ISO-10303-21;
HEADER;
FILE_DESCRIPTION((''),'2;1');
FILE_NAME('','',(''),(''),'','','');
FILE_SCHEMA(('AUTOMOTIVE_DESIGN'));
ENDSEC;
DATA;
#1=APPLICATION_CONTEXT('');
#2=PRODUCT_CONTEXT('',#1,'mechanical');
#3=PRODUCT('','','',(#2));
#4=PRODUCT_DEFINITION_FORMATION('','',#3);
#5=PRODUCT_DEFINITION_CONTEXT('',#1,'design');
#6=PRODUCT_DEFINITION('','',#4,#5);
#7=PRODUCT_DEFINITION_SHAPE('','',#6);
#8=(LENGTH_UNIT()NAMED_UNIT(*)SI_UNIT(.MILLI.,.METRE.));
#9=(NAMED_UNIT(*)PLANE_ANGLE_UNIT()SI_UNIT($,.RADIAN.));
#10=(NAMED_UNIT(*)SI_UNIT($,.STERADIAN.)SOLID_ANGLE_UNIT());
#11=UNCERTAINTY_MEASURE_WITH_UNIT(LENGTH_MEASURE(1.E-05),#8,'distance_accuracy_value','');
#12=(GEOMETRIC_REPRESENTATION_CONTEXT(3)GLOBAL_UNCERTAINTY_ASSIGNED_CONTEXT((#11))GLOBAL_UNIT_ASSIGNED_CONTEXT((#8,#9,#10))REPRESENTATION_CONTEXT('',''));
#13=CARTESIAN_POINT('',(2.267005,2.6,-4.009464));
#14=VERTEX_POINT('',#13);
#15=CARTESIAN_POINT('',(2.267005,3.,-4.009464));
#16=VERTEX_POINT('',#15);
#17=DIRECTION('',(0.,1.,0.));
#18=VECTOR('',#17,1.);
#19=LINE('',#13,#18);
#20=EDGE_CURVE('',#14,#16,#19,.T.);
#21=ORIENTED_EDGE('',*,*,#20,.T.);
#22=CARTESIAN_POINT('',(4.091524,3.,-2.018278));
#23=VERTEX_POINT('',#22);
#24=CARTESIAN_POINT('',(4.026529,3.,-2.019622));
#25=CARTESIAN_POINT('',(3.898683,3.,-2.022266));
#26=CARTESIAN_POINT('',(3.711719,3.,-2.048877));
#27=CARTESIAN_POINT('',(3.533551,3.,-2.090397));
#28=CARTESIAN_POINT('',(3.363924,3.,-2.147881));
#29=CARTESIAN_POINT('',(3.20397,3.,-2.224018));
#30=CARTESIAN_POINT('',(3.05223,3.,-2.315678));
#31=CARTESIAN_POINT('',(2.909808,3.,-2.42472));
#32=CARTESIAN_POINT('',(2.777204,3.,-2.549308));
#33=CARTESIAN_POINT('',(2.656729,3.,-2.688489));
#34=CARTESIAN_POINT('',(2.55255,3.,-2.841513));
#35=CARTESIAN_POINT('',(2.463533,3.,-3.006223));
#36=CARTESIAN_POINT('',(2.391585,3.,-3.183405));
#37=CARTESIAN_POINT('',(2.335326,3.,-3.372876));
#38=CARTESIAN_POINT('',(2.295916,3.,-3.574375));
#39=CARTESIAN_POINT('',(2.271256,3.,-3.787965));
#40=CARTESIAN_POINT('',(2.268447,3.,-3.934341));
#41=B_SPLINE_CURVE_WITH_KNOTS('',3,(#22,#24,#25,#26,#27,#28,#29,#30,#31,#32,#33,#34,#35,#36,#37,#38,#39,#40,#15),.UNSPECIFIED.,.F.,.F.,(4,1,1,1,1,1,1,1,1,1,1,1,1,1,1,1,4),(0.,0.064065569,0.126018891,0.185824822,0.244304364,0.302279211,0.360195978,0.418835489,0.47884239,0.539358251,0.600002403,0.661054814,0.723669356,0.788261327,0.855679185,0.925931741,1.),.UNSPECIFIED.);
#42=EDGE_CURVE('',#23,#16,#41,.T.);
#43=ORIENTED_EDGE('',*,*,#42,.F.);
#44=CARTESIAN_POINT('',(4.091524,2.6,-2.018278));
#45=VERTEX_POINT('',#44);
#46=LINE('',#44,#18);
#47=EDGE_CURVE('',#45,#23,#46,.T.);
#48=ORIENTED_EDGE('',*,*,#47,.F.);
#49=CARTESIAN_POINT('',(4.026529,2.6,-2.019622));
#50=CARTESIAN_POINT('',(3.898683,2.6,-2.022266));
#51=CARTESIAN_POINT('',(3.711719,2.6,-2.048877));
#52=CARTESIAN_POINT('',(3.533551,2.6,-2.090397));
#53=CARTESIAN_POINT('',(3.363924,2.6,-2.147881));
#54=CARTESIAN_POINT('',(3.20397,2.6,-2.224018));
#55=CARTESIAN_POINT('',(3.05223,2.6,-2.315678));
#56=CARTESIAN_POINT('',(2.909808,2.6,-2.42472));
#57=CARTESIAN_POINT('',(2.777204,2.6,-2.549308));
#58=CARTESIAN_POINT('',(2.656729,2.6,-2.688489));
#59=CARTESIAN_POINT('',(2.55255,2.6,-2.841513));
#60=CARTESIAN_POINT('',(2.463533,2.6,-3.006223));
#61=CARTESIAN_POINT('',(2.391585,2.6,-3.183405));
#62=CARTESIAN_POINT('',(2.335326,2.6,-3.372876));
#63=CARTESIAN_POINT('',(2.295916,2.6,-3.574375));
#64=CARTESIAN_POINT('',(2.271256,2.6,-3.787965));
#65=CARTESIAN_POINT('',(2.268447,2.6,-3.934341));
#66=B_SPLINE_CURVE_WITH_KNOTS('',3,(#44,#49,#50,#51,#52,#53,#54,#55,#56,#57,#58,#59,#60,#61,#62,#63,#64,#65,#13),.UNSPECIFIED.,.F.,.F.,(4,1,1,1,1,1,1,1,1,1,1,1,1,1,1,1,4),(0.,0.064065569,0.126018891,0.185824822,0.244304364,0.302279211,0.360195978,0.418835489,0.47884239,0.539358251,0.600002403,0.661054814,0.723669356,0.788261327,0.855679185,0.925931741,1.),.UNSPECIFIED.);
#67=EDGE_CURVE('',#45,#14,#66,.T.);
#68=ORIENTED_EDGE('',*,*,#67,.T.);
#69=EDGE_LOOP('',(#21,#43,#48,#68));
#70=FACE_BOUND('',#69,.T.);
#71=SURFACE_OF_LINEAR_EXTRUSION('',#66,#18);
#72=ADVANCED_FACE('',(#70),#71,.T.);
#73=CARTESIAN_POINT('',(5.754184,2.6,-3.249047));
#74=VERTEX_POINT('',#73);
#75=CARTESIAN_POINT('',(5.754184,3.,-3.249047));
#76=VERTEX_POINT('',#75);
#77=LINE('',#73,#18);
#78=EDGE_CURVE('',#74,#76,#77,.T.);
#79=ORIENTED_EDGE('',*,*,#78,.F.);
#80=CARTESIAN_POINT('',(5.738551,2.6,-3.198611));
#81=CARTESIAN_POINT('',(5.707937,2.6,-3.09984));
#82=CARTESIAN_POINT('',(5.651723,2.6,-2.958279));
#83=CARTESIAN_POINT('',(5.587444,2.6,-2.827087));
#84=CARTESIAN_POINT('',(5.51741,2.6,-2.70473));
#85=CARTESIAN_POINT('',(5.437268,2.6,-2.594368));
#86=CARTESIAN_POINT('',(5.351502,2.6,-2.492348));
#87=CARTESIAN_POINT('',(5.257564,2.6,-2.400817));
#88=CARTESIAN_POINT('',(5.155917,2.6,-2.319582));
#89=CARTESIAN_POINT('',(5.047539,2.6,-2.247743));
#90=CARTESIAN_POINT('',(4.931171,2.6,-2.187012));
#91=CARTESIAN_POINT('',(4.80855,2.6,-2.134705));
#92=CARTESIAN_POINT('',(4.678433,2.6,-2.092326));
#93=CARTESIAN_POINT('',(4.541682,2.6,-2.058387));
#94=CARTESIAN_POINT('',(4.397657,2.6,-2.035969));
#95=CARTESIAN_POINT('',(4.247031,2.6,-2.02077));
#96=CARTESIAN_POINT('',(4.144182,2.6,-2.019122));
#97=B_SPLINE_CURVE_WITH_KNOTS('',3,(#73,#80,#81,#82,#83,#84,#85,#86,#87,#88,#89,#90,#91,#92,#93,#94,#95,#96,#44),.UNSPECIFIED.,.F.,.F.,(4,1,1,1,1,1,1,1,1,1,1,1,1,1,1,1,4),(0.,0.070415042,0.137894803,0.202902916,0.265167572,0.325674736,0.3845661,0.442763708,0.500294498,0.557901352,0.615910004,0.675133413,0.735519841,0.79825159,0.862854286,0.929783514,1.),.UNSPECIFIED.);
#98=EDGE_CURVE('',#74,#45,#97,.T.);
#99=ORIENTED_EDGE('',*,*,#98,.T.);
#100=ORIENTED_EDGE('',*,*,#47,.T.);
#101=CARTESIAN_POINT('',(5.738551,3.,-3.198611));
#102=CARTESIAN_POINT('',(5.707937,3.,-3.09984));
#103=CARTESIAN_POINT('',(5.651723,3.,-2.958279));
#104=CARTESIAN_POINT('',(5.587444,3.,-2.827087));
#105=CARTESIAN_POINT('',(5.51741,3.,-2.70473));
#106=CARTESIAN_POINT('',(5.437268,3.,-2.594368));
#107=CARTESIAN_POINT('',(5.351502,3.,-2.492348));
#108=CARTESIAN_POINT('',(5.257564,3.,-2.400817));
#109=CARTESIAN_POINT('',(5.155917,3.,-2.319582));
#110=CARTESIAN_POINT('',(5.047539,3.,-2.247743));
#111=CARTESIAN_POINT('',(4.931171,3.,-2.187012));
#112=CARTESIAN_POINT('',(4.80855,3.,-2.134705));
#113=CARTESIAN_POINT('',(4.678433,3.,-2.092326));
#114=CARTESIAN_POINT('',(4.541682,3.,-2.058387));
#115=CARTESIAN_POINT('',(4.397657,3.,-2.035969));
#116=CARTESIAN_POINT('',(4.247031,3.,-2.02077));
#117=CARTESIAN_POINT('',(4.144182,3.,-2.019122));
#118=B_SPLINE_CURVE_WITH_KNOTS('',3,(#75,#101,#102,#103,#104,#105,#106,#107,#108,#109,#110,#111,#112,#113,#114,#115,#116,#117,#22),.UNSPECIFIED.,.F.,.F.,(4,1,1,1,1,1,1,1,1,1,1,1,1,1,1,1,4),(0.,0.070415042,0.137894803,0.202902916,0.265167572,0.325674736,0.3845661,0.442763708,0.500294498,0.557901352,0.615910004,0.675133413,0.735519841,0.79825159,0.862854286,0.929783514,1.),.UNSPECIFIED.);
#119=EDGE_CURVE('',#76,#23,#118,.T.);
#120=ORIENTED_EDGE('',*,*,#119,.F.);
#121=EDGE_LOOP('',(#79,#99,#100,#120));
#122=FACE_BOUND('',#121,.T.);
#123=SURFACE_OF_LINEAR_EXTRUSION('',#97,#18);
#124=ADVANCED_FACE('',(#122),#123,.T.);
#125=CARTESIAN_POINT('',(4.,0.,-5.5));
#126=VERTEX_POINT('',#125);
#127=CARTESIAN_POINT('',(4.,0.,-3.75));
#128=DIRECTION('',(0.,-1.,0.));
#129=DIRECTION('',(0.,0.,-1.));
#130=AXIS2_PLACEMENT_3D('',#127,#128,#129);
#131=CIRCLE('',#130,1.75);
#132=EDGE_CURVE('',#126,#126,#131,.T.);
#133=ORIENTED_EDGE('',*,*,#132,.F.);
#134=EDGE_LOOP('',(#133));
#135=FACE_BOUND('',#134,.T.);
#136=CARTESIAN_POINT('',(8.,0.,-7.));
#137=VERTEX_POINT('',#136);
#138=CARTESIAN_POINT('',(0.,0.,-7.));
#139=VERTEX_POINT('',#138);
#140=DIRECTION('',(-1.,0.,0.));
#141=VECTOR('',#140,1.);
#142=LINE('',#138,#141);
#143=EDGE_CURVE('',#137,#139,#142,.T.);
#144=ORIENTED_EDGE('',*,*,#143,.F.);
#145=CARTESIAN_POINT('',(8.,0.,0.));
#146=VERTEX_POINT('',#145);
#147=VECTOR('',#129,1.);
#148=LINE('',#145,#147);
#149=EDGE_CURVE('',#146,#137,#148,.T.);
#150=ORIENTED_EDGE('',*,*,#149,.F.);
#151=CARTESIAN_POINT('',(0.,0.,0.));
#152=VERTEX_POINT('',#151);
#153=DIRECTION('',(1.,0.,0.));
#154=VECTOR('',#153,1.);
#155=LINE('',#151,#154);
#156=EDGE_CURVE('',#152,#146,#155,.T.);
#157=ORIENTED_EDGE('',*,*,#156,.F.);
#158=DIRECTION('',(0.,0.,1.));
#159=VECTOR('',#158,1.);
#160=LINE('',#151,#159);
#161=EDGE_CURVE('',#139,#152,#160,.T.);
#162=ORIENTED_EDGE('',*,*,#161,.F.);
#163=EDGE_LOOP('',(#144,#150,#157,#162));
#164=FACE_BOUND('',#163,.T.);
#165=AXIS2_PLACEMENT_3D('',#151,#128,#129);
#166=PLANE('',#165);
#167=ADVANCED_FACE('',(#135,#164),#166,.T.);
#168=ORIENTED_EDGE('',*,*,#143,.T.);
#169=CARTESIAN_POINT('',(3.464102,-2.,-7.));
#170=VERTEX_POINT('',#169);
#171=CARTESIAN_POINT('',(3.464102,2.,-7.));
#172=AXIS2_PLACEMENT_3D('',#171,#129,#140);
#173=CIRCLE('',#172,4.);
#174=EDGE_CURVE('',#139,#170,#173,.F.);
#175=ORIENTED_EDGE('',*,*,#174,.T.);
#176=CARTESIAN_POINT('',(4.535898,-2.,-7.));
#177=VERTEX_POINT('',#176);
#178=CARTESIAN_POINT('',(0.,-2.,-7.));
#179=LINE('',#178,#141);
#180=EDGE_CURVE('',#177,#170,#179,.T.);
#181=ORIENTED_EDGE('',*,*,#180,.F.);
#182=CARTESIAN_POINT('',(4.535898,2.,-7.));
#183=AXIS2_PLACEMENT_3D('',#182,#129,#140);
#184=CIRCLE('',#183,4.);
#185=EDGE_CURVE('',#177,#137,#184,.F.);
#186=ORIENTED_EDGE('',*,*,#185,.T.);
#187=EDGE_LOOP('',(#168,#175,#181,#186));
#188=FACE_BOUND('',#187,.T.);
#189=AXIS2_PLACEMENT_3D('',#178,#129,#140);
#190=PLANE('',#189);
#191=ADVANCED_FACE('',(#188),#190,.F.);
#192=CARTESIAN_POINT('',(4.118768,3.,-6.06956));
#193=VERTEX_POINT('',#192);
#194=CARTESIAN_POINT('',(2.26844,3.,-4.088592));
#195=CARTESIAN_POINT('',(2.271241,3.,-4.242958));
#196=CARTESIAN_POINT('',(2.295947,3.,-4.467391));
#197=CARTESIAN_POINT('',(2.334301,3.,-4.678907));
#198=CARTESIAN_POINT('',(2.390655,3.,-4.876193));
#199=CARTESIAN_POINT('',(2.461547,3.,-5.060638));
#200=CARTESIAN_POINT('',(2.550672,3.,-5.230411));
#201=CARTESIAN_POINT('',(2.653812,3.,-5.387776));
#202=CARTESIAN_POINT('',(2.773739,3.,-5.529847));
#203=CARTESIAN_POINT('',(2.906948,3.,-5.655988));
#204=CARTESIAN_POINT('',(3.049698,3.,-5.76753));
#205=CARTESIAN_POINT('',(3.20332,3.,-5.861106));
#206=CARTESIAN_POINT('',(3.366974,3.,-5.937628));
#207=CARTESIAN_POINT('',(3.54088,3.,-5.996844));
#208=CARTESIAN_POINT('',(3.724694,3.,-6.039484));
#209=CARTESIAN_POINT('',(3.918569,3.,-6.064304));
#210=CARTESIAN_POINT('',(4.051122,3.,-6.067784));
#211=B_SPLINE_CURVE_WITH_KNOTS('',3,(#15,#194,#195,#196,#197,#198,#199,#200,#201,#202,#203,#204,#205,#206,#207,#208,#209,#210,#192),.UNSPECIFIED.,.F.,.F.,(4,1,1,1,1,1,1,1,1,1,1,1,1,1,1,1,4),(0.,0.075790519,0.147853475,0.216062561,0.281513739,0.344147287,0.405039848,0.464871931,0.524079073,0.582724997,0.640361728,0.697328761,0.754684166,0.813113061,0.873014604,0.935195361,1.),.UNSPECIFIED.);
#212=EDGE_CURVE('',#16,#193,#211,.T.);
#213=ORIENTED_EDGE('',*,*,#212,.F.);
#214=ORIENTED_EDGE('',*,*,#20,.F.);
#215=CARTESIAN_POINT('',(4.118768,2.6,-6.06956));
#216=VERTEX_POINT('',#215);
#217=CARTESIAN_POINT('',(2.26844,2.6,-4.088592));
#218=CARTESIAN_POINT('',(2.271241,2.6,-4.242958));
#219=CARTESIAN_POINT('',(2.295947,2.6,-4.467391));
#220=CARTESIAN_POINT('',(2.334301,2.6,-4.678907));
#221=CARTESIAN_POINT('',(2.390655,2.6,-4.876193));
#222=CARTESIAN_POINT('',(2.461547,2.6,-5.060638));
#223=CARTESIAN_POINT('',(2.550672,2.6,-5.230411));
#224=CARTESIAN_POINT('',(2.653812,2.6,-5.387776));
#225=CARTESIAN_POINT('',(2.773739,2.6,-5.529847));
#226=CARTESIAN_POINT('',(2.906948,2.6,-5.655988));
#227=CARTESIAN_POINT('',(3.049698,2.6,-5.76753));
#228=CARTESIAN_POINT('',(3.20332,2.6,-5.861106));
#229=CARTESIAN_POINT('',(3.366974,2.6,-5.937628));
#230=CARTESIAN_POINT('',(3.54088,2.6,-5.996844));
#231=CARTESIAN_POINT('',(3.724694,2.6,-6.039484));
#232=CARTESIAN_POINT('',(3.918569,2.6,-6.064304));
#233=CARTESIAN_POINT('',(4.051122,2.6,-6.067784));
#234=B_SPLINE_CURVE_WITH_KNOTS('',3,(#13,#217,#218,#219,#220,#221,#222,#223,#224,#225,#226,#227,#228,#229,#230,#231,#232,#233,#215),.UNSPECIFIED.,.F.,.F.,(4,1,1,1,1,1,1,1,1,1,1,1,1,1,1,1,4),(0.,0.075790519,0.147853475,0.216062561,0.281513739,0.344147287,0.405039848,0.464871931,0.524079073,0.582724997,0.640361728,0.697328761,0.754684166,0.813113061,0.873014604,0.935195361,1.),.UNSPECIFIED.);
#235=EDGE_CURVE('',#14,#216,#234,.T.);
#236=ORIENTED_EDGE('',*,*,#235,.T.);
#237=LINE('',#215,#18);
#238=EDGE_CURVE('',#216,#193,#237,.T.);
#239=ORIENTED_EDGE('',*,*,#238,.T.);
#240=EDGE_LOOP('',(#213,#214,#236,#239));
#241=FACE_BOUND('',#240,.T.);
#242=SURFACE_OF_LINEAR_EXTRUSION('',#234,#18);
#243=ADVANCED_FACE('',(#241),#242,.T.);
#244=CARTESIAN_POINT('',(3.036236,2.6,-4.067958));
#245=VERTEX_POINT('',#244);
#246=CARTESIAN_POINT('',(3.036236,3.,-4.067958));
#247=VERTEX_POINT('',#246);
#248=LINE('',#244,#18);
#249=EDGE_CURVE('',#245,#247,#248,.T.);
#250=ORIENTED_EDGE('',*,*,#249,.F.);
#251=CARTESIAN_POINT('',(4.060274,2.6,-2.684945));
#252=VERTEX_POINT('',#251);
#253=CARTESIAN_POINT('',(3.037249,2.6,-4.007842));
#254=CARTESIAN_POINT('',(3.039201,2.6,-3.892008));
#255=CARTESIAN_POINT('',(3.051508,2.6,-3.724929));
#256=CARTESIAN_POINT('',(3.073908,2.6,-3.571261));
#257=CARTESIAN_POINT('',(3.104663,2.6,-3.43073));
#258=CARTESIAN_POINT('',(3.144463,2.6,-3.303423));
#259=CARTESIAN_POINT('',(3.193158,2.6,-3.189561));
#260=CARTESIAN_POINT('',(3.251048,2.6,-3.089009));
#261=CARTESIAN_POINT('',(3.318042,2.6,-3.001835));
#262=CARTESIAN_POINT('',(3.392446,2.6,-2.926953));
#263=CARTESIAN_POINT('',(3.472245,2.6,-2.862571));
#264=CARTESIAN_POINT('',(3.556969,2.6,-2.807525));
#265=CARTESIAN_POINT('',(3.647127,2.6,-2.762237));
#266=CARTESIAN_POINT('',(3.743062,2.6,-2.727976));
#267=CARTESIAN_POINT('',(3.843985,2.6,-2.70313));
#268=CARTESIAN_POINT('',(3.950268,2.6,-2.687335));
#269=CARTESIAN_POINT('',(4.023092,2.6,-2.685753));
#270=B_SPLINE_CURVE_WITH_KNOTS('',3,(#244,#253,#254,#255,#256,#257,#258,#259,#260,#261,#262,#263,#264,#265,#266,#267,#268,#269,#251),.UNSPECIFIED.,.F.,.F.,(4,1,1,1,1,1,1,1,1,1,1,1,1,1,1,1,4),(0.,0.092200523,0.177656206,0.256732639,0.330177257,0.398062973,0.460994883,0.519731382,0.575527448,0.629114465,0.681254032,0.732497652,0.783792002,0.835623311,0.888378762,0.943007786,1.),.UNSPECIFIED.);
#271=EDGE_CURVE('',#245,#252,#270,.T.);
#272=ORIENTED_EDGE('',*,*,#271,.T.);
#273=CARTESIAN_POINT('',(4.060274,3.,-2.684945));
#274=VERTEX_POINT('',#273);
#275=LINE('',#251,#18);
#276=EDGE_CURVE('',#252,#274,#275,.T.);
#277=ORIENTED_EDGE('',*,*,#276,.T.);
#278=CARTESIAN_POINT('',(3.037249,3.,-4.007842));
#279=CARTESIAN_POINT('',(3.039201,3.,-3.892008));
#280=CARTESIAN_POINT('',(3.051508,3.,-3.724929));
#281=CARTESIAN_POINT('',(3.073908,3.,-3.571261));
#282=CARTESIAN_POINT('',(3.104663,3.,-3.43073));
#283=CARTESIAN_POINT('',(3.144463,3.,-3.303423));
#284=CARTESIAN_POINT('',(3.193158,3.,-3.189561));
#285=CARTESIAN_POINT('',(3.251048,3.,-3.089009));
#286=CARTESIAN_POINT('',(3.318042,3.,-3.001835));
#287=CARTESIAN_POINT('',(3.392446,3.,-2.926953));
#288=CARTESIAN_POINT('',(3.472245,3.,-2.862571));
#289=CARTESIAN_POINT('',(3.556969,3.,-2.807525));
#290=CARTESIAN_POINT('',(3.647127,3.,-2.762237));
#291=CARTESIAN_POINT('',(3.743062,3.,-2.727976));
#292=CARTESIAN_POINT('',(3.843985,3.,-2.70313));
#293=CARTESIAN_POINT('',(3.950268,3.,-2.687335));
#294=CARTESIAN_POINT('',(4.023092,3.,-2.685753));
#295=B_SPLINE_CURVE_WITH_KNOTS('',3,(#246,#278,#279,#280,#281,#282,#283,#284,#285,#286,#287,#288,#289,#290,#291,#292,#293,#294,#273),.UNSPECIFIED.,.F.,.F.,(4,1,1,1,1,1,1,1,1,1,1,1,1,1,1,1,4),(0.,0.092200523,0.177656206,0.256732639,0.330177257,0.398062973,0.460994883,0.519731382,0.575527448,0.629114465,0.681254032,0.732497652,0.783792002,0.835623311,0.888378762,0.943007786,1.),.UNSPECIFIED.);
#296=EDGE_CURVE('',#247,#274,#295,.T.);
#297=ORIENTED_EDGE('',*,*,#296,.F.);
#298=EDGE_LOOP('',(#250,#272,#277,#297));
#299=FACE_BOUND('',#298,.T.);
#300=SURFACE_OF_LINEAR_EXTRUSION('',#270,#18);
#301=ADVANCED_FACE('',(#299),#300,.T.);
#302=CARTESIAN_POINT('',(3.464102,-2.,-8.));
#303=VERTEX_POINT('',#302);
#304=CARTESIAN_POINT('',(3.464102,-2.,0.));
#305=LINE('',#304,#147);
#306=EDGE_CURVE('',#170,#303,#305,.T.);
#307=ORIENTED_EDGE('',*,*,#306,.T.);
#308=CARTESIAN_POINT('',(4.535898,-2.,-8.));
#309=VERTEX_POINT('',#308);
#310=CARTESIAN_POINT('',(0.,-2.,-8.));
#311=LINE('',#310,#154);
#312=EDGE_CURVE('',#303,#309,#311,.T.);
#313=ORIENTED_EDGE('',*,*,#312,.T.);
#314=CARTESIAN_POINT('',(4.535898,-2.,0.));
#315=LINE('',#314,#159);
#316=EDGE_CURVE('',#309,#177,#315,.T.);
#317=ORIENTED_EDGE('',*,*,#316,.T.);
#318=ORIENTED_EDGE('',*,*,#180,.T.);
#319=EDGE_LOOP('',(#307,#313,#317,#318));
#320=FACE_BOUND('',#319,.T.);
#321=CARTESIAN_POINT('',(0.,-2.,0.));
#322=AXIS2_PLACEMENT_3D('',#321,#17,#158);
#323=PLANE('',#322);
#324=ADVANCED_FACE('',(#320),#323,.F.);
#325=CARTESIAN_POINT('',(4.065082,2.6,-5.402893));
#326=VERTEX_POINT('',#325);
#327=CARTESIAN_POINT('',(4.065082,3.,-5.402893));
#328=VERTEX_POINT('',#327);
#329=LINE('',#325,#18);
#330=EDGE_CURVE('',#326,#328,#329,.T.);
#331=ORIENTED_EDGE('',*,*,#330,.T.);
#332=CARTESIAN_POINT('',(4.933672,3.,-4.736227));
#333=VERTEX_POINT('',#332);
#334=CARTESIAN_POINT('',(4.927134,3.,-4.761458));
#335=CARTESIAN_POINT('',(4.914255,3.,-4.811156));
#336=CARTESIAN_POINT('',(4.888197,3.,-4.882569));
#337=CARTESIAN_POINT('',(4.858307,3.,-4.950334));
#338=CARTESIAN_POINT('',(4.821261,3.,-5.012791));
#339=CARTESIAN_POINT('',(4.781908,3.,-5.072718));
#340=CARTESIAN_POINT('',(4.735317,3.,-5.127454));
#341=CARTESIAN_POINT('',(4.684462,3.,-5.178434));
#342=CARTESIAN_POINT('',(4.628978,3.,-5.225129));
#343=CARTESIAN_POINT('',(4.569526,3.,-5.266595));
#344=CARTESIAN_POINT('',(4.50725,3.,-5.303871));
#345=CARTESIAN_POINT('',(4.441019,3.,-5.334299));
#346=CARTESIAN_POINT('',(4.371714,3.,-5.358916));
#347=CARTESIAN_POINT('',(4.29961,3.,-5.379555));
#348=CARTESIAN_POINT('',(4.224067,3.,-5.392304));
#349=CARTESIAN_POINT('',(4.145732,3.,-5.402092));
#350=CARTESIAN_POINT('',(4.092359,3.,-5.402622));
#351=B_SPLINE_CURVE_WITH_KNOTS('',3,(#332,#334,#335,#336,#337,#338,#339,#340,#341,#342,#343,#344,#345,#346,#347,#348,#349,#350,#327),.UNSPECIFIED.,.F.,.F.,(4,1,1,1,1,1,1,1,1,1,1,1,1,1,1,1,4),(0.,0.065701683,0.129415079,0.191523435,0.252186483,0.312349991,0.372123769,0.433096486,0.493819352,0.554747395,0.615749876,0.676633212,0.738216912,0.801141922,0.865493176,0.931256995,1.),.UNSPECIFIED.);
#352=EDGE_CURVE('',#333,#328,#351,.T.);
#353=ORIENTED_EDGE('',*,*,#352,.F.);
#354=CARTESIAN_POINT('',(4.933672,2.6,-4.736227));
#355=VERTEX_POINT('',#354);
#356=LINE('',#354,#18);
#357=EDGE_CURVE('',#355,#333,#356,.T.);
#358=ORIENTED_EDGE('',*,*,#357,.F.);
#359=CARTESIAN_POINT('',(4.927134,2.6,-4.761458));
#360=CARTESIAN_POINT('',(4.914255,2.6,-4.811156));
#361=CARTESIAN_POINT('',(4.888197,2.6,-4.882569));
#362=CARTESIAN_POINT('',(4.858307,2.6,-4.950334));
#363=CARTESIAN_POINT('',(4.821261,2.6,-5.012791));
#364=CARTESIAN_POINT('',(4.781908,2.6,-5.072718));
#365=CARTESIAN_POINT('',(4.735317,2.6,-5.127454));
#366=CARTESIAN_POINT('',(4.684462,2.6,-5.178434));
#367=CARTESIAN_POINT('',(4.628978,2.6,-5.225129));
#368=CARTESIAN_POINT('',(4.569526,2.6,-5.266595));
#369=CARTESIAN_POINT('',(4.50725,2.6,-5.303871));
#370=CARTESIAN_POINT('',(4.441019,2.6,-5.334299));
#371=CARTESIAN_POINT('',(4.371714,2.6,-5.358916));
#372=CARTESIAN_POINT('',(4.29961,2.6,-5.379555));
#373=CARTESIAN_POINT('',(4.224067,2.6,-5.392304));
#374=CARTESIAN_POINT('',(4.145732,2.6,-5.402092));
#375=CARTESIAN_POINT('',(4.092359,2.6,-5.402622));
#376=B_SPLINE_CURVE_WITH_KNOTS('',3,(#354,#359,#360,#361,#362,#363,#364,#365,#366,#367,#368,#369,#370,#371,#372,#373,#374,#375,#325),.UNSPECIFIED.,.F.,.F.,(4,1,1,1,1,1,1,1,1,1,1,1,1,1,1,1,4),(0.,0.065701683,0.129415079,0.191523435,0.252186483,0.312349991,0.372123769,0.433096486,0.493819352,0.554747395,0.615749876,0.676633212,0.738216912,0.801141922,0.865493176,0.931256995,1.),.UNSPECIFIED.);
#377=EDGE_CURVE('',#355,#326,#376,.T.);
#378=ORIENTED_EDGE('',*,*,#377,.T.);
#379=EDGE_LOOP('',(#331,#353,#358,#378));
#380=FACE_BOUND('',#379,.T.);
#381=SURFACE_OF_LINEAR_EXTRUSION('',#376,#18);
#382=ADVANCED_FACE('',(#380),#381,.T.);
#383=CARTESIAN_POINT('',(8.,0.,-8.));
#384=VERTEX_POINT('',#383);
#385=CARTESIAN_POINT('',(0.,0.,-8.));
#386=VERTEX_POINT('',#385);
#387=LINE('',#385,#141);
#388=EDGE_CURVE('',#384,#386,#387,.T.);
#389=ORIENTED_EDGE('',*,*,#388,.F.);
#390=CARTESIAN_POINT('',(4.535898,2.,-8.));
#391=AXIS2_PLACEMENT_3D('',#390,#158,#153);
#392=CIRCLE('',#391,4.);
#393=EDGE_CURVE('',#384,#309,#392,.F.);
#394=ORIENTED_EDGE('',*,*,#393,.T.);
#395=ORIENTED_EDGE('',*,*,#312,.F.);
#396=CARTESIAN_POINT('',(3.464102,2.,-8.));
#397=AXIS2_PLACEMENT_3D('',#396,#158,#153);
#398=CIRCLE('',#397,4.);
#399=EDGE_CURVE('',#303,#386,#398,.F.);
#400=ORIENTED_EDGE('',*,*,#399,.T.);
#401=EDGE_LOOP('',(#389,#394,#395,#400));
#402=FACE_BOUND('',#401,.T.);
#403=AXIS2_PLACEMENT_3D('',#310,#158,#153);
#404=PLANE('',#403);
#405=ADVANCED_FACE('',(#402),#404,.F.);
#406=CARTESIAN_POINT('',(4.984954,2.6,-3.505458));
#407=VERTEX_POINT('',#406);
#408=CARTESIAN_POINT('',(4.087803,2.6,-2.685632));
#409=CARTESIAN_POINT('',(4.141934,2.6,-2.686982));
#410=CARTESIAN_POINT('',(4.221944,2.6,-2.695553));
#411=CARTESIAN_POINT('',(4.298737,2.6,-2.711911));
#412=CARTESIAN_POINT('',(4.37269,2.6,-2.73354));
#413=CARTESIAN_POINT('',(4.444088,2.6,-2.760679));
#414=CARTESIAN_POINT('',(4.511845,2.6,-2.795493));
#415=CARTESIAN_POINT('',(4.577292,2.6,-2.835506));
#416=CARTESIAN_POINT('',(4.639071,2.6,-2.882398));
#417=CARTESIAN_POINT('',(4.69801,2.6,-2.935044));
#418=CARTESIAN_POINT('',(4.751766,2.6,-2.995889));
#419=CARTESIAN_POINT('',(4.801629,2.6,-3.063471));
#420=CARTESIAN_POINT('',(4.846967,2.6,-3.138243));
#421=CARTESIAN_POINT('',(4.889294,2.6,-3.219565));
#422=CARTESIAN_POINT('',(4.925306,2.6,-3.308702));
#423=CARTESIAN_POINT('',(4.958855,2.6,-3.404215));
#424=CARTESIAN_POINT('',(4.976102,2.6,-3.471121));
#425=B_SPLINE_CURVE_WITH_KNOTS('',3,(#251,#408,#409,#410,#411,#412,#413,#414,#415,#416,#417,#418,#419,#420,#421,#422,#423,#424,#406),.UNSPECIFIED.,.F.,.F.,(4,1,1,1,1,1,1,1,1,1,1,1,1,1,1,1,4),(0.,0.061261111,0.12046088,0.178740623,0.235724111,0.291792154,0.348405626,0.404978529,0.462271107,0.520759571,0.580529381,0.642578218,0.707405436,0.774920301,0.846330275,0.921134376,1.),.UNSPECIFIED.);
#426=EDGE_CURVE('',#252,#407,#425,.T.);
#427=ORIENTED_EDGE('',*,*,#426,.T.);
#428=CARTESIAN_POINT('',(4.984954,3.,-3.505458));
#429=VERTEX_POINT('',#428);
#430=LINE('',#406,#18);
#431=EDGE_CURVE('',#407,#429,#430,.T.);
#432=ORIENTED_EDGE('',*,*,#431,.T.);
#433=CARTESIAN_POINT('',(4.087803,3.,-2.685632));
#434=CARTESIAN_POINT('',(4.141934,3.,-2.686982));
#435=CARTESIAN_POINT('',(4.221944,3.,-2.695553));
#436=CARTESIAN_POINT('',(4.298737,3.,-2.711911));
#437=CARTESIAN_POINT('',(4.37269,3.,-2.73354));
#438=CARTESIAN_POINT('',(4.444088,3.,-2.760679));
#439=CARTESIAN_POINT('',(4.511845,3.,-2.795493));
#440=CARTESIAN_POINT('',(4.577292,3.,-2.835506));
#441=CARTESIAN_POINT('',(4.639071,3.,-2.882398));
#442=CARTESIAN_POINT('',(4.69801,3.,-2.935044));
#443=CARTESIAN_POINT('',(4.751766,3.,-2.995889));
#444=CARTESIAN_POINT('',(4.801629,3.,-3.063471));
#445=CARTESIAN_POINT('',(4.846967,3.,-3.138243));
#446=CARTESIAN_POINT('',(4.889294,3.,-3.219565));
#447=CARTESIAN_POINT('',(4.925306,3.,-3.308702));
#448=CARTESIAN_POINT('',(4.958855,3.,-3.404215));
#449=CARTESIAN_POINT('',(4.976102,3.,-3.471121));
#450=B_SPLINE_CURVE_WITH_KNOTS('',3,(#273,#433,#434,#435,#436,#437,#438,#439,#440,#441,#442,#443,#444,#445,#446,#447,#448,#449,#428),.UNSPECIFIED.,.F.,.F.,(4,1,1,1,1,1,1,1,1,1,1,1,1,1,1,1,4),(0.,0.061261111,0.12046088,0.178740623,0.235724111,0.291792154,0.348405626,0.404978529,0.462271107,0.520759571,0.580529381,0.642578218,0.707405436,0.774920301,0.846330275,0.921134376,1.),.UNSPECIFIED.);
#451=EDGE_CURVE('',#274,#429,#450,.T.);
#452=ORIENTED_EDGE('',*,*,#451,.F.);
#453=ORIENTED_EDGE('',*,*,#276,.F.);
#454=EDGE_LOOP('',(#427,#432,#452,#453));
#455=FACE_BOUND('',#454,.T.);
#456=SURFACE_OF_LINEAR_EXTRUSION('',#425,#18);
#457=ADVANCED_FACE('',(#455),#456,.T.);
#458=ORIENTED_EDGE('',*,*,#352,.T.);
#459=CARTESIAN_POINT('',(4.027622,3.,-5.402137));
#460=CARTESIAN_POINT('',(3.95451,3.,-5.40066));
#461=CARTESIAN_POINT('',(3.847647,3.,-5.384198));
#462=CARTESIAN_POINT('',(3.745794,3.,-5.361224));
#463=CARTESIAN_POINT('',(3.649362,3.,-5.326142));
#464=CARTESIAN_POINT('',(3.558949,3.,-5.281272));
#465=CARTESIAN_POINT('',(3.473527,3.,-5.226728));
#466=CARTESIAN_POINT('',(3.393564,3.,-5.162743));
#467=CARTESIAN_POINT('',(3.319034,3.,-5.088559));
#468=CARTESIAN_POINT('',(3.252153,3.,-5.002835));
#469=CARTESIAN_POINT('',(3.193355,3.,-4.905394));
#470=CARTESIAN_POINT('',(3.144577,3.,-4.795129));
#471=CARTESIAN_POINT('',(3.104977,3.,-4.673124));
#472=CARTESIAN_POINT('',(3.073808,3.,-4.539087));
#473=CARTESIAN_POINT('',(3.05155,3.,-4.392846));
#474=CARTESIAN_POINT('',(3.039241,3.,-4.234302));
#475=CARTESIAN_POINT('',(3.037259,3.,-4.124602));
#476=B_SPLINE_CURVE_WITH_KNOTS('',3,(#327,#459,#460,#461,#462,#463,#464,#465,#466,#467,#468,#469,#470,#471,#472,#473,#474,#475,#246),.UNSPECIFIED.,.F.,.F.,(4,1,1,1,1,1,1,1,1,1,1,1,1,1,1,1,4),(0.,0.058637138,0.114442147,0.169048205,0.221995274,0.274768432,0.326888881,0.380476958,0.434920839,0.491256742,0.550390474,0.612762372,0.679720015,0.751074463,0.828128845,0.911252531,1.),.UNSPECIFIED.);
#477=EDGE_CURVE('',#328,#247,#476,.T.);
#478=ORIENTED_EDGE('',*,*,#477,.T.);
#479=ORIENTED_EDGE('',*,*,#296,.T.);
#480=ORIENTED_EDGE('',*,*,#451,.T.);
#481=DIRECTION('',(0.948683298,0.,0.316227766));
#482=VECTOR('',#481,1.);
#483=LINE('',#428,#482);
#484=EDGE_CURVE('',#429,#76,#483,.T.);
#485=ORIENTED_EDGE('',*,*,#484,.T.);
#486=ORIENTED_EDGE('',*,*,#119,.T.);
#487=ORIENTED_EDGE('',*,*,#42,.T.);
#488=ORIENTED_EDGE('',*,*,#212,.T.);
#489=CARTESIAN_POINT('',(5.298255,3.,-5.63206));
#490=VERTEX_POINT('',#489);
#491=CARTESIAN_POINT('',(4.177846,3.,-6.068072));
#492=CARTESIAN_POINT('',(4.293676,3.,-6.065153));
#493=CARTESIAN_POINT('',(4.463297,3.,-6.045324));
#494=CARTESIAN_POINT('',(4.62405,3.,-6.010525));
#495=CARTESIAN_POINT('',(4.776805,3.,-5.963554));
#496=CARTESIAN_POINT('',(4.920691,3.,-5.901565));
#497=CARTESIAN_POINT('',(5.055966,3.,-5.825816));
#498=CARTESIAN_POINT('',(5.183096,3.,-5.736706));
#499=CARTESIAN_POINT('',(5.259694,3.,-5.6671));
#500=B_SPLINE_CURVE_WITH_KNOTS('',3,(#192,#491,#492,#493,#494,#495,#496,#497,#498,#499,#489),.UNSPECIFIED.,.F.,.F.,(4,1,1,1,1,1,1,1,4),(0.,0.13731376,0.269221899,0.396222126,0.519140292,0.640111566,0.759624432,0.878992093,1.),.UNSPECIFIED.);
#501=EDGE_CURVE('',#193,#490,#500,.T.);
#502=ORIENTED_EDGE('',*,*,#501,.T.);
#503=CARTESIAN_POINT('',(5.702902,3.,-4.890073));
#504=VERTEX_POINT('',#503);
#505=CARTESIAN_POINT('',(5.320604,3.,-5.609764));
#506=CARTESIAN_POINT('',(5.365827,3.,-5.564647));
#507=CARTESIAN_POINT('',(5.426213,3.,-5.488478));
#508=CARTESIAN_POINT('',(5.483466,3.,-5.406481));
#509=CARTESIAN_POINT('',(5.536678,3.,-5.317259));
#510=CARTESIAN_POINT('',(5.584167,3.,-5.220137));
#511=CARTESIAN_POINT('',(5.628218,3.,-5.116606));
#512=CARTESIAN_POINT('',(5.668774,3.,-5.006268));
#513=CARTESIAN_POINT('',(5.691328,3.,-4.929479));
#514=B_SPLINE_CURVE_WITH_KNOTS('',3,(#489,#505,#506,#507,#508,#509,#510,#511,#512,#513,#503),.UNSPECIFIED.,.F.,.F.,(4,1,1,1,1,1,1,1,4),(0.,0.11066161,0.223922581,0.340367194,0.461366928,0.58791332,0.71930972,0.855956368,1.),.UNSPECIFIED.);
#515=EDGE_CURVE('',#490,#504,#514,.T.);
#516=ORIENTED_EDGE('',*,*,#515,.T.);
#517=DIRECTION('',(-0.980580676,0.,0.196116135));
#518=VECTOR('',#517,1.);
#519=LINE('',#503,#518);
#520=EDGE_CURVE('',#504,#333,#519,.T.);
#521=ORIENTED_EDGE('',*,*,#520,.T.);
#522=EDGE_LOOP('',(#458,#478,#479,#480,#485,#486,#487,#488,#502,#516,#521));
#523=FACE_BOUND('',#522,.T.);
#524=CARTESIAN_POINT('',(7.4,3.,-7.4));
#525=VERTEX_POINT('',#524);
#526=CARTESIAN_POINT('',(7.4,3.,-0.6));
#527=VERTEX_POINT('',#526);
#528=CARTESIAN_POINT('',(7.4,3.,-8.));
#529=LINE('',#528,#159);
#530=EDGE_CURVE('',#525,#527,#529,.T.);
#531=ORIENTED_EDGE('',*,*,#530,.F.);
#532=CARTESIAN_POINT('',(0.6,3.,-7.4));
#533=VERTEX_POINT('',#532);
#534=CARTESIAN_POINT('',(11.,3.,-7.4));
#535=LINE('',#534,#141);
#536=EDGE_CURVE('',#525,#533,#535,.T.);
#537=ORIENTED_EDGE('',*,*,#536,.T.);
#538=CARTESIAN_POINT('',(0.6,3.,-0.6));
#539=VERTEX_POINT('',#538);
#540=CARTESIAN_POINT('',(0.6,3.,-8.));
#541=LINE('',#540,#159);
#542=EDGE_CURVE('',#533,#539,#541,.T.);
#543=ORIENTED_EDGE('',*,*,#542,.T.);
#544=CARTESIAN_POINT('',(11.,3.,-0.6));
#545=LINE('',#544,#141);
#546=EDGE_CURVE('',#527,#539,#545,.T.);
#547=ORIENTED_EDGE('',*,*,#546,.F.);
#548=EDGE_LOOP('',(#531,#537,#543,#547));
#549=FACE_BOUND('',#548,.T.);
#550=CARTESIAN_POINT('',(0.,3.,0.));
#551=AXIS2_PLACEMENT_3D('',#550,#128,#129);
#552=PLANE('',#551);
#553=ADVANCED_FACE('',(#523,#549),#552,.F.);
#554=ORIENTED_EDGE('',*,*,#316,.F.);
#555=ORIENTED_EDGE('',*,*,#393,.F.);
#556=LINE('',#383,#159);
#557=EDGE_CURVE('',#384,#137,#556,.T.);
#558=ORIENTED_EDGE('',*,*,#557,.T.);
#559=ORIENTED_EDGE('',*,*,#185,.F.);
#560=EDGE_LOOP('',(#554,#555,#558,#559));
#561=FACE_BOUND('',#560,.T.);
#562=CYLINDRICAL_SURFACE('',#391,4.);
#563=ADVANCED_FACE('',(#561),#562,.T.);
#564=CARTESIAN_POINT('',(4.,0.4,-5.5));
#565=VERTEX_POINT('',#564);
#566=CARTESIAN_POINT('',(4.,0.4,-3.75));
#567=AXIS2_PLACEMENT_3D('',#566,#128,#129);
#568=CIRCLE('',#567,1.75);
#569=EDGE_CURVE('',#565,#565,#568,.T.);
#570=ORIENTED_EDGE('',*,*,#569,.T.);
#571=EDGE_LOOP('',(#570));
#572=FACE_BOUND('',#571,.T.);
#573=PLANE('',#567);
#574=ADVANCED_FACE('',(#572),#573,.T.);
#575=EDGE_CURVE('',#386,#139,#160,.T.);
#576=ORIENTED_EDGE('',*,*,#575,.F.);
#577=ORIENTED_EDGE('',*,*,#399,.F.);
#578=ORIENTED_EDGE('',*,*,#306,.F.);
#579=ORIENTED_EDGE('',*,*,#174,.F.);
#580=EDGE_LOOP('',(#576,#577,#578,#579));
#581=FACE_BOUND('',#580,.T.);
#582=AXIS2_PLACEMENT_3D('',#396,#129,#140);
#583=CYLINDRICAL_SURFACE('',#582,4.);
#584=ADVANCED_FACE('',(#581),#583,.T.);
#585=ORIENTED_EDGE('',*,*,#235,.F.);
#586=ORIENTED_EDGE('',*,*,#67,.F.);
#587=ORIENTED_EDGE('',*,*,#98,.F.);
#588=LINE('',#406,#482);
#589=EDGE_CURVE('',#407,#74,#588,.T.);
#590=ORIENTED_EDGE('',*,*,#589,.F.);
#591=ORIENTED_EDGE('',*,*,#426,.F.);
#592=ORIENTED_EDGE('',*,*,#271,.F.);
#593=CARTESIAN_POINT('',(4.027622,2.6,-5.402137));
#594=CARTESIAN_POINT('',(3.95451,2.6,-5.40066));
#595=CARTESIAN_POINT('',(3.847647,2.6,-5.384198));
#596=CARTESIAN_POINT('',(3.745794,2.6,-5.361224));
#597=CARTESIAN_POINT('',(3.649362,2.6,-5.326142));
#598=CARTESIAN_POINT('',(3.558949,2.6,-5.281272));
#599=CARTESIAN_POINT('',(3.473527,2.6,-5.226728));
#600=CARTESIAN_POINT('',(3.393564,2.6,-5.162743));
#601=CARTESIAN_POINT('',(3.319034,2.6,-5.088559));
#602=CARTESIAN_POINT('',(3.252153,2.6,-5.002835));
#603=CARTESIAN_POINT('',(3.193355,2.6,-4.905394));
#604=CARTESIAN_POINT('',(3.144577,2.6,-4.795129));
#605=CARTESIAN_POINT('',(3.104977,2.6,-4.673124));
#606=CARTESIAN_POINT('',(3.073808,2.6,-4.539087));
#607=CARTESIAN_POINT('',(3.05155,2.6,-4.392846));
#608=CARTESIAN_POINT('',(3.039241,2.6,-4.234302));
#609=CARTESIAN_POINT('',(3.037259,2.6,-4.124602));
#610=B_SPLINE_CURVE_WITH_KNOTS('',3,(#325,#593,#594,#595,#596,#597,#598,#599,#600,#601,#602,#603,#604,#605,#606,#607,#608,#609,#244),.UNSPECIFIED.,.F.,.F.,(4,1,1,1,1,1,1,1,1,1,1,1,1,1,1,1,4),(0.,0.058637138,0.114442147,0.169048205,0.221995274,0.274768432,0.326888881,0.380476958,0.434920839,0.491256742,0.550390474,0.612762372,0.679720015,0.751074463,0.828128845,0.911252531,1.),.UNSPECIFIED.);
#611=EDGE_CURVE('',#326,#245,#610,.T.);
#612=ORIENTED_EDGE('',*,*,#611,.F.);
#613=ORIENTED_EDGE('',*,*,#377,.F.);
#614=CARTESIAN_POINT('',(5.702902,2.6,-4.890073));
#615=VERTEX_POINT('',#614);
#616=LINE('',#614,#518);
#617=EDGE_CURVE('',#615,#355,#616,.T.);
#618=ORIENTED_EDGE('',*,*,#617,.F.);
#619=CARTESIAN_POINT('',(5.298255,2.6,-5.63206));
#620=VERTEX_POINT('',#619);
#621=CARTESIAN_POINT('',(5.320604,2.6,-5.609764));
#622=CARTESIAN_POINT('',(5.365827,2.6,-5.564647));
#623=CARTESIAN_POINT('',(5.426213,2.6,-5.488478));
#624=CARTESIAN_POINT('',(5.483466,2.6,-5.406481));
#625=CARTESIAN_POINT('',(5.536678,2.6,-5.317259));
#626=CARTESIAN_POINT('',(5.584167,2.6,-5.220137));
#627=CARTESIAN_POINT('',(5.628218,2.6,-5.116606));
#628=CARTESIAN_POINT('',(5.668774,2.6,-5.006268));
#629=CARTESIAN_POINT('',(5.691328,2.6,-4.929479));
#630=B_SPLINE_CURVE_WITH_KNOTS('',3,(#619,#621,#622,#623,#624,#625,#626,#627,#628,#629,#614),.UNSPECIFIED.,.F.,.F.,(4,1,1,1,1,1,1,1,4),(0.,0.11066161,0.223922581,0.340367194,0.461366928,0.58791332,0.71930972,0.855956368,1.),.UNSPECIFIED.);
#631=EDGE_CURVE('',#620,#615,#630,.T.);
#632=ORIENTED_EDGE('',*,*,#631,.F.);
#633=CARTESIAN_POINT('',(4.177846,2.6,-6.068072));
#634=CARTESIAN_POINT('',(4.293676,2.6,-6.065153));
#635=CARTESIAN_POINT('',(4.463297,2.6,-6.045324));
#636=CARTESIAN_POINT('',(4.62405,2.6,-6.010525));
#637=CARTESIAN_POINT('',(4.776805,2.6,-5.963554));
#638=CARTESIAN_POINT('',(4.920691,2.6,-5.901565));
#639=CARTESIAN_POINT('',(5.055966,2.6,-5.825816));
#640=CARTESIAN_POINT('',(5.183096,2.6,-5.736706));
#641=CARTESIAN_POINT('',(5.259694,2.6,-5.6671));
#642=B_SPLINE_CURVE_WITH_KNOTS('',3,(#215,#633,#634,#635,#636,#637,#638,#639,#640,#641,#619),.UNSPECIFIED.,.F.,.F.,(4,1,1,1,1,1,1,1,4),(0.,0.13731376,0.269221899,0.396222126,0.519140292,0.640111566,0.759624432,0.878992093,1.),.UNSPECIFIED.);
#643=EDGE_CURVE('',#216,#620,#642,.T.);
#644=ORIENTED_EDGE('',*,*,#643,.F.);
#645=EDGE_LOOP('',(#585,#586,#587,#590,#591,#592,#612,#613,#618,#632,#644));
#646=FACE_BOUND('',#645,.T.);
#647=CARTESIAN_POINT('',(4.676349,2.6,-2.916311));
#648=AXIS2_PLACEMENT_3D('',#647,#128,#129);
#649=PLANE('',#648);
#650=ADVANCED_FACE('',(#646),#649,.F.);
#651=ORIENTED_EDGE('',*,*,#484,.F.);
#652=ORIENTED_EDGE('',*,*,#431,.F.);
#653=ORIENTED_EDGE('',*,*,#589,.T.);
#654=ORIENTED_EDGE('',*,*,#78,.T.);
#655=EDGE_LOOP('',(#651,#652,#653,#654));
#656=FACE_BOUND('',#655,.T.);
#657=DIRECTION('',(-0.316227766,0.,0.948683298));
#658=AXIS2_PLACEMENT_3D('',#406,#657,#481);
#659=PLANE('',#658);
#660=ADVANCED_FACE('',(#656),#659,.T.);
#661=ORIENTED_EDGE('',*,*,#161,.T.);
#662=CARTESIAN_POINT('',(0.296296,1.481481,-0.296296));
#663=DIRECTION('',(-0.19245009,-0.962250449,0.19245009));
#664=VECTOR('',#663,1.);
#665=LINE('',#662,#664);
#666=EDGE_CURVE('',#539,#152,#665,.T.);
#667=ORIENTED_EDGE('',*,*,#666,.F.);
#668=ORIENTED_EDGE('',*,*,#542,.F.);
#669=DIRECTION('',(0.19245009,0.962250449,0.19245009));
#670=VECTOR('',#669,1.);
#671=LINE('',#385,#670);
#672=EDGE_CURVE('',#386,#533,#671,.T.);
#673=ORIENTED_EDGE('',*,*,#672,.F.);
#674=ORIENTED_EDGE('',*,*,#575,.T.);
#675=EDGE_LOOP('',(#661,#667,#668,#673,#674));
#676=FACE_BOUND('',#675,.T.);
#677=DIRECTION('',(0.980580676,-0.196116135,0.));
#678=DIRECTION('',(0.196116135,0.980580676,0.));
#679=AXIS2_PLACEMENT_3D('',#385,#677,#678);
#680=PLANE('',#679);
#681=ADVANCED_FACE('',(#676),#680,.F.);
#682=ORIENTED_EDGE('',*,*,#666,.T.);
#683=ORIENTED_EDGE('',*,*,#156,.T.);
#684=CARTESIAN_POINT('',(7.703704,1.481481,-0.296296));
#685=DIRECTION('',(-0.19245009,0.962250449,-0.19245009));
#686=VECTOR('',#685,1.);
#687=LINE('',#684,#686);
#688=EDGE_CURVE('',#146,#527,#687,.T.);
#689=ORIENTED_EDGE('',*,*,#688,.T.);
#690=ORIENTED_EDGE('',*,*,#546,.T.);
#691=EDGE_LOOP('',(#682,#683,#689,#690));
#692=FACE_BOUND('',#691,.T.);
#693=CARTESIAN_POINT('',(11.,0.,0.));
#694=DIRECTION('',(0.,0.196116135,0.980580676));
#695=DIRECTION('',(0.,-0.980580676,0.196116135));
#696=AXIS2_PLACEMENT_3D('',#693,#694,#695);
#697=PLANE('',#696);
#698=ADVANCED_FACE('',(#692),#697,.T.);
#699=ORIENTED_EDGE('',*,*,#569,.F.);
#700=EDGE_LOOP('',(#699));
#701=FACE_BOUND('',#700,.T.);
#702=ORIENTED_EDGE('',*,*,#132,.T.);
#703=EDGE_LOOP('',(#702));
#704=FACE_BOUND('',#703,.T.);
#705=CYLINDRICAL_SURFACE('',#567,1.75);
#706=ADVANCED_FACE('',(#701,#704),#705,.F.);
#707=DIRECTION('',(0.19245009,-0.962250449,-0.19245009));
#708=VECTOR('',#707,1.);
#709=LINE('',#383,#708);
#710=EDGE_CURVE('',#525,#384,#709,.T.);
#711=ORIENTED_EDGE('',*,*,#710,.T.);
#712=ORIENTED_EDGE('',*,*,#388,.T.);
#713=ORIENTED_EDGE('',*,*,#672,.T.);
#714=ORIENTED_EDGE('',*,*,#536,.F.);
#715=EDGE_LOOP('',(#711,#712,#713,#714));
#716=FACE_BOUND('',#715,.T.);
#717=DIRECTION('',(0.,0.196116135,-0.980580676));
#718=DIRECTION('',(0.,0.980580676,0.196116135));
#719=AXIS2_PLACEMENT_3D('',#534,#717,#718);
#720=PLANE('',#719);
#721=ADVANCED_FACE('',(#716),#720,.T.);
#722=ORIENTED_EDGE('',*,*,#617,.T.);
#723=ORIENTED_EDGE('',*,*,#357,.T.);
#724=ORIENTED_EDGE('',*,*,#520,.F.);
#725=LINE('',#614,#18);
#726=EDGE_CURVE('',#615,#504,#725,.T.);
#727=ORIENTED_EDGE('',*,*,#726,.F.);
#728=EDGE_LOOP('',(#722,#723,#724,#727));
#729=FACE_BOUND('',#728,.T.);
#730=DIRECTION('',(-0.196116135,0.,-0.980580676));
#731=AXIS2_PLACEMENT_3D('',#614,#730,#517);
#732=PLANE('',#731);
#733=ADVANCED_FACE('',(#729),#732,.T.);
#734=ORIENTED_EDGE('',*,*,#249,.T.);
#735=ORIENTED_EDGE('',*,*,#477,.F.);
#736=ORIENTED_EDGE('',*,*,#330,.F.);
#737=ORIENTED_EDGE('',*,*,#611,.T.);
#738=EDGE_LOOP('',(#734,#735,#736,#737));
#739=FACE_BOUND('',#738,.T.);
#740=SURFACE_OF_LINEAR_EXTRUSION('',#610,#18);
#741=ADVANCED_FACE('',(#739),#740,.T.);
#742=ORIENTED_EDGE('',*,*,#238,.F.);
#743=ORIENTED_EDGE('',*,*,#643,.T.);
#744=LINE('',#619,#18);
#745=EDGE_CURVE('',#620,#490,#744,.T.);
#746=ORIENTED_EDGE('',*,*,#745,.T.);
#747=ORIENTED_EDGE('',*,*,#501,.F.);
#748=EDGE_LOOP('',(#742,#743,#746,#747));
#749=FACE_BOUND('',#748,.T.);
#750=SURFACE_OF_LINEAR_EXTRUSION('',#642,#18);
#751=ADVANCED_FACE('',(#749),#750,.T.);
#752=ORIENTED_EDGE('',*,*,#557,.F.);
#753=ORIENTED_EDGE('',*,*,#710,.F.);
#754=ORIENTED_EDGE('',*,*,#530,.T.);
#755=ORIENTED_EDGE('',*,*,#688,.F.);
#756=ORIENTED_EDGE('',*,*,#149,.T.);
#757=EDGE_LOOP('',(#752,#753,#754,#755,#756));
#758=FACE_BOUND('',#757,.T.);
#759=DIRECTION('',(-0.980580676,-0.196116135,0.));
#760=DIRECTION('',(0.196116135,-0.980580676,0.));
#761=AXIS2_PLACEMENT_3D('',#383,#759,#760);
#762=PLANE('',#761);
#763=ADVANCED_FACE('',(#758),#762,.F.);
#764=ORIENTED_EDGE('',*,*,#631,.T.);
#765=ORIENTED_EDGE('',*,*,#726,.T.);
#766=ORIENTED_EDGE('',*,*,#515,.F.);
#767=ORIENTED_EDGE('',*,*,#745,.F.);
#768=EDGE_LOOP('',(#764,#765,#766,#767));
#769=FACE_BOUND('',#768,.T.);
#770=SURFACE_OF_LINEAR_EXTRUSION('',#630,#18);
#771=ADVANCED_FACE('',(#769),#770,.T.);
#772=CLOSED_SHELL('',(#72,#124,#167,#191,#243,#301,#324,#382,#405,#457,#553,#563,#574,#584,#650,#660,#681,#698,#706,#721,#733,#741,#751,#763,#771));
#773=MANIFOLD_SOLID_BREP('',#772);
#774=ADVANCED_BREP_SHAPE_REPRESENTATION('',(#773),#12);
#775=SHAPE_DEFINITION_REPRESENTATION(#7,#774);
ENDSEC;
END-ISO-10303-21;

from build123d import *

# Parameters (mm, degrees)
SKETCH1_W               = 8
SKETCH1_H               = 8
BOSS_EXTRUDE1_DEPTH     = 3
CUT_EXTRUDE1_DEPTH      = 12.704699911
CUT_EXTRUDE1_DEPTH_BACK = 12.704699911
CUT_EXTRUDE2_DEPTH      = 11
SKETCH4_R               = 1.75
CUT_EXTRUDE3_DEPTH      = 0.4
SKETCH5_W               = 8
SKETCH5_H               = 1
BOSS_EXTRUDE2_DEPTH     = 2
FILLET1_R               = 4
CUT_EXTRUDE4_DEPTH      = 0.4


with BuildPart() as part:
    # Sketch1 → Boss-Extrude1 (new body)
    with BuildSketch(Plane(origin=(0, 0, 0), x_dir=(1, 0, 0), z_dir=(0, 1, 0))):
        with Locations((4, 4)):
            Rectangle(SKETCH1_W, SKETCH1_H)
    extrude(amount=BOSS_EXTRUDE1_DEPTH)

    # Sketch2 → Cut-Extrude1 (cut, two sides: drawn at the far end of the back side and taken through both)
    with BuildSketch(Plane.XY.offset(-CUT_EXTRUDE1_DEPTH_BACK)):
        Polygon((0, 0), (0.6, 3), (0, 3), align=None)
        Polygon((8, 0), (7.4, 3), (8, 3), align=None)
    extrude(amount=CUT_EXTRUDE1_DEPTH + CUT_EXTRUDE1_DEPTH_BACK, mode=Mode.SUBTRACT)

    # Sketch3 → Cut-Extrude2 (cut)
    with BuildSketch(Plane(origin=(0, 0, 0), x_dir=(0, 0, -1), z_dir=(1, 0, 0))):
        Polygon((0, 0), (0.6, 3), (0, 3), align=None)
        Polygon((8, 3), (7.4, 3), (8, 0), align=None)
    extrude(amount=CUT_EXTRUDE2_DEPTH, mode=Mode.SUBTRACT)

    # Sketch4 → Cut-Extrude3 (cut)
    with BuildSketch(Plane.XZ):
        with Locations(Location((4, -3.75, 0), (0, 0, 270))):
            Circle(SKETCH4_R)
    extrude(amount=-CUT_EXTRUDE3_DEPTH, mode=Mode.SUBTRACT)

    # Sketch5 → Boss-Extrude2 (add)
    with BuildSketch(Plane.XZ):
        with Locations((4, -7.5)):
            Rectangle(SKETCH5_W, SKETCH5_H)
    extrude(amount=BOSS_EXTRUDE2_DEPTH)

    # Fillet1
    # the kernel refuses this fillet: 4 mm, written as the material it takes off along each edge
    with BuildSketch(Plane(origin=(8, -2, -16.660254038), x_dir=(0, 1, 0), z_dir=(0, 0, 1)), Plane(origin=(0, -2, 1.660254038), x_dir=(0, 1, 0), z_dir=(0, 0, -1))) as fillet1_piece_1:
        with BuildLine():
            CenterArc((4, 3.464101615), FILLET1_R, 180, 60)
            Line((0, 3.464101615), (-0.08, 3.464101615))
            Line((-0.08, 3.464101615), (-0.08, 0))
            Line((-0.08, 0), (0, -0.08))
            ThreePointArc((0, -0.08), (1, -0.08), (1.96, -0.069282032))
            Line((1.96, -0.069282032), (2, 0))
        make_face()
    extrude(amount=18.320508076, mode=Mode.SUBTRACT)

    # Sketch6 → Cut-Extrude4 (cut)
    with BuildSketch(Plane(origin=(0, 3, 0), x_dir=(1, 0, 0), z_dir=(0, 1, 0))):
        with BuildLine():
            Line((4.984953699, 3.505457585), (5.754184468, 3.249047329))
            add(Edge.make_bspline(
                [(5.754184468, 3.249047329), (5.738551331, 3.198610805), (5.707936732, 3.099840225), (5.651723194, 2.958278532), (5.587443886, 2.827086856), (5.517410433, 2.704729688), (5.437267593, 2.594367909), (5.351502188, 2.492347505), (5.25756407, 2.400817223), (5.155916755, 2.319581611), (5.047538657, 2.247743191), (4.931170847, 2.187011676), (4.808549951, 2.134705195), (4.678432524, 2.092325917), (4.541682112, 2.058386549), (4.397657073, 2.035969411), (4.247031142, 2.020769852), (4.144181592, 2.01912185), (4.091524212, 2.018278098)],
                knots=[0, 0, 0, 0, 1.126640671, 2.206316847, 3.246446654, 4.24268115, 5.210795778, 6.153057602, 7.084219323, 8.004711971, 8.926421631, 9.854560063, 10.802134612, 11.768317461, 12.772025444, 13.805668576, 14.876536225, 16, 16, 16, 16], degree=3))
            add(Edge.make_bspline(
                [(4.091524212, 2.018278098), (4.026529436, 2.019622049), (3.898682769, 2.022265641), (3.711719127, 2.048877042), (3.533551231, 2.090397174), (3.363924198, 2.147881075), (3.203970267, 2.224018355), (3.052230113, 2.31567777), (2.909808045, 2.424720155), (2.777203704, 2.549307725), (2.656729454, 2.688489389), (2.552550394, 2.841513049), (2.46353299, 3.006222974), (2.391584534, 3.18340452), (2.335325697, 3.372875751), (2.295916265, 3.574374695), (2.271256348, 3.787964822), (2.268446864, 3.934340923), (2.267004981, 4.009463995)],
                knots=[0, 0, 0, 0, 1.025049111, 2.016302254, 2.973197159, 3.90886983, 4.83646737, 5.763135642, 6.70136783, 7.661478232, 8.629732022, 9.600038443, 10.576877021, 11.5787097, 12.612181225, 13.690866959, 14.814907849, 16, 16, 16, 16], degree=3))
            add(Edge.make_bspline(
                [(2.267004981, 4.009463995), (2.268440364, 4.088592426), (2.271240535, 4.242957555), (2.295946649, 4.467391238), (2.33430142, 4.6789069), (2.390655342, 4.87619306), (2.461546504, 5.060638151), (2.550671985, 5.230411199), (2.653811862, 5.387775744), (2.773739341, 5.529847487), (2.90694801, 5.655987983), (3.049697575, 5.767530284), (3.203319761, 5.861106277), (3.366973913, 5.937627827), (3.540879519, 5.996843969), (3.724694381, 6.039484239), (3.918568892, 6.064303618), (4.051121857, 6.067784001), (4.118767802, 6.069560149)],
                knots=[0, 0, 0, 0, 1.212648312, 2.365655595, 3.457000981, 4.504219827, 5.506356588, 6.480637568, 7.437950897, 8.385265166, 9.323599949, 10.245787653, 11.157260172, 12.074946661, 13.00980897, 13.968233668, 14.963125779, 16, 16, 16, 16], degree=3))
            add(Edge.make_bspline(
                [(4.118767802, 6.069560149), (4.177845619, 6.068071541), (4.293675542, 6.065152928), (4.463296702, 6.045323759), (4.624050093, 6.010524892), (4.776804639, 5.963554159), (4.920690778, 5.901565287), (5.05596628, 5.825815524), (5.18309612, 5.736705664), (5.259694467, 5.667100309), (5.298254981, 5.632060149)],
                knots=[0, 0, 0, 0, 1.098510076, 2.153775193, 3.169777012, 4.153122333, 5.120892526, 6.076995459, 7.031936742, 8, 8, 8, 8], degree=3))
            add(Edge.make_bspline(
                [(5.298254981, 5.632060149), (5.320604149, 5.60976374), (5.365827451, 5.564647194), (5.426213252, 5.488477681), (5.483466493, 5.406481188), (5.536678451, 5.317258958), (5.58416733, 5.220136739), (5.628218337, 5.11660602), (5.668774447, 5.006267724), (5.691328308, 4.929479087), (5.702902417, 4.89007297)],
                knots=[0, 0, 0, 0, 0.885292881, 1.791380647, 2.722937556, 3.69093542, 4.703306561, 5.754477758, 6.847650944, 8, 8, 8, 8], degree=3))
            Line((5.702902417, 4.89007297), (4.933671648, 4.736226816))
            add(Edge.make_bspline(
                [(4.933671648, 4.736226816), (4.927133502, 4.76145763), (4.914255072, 4.811155713), (4.888197319, 4.88256913), (4.858307022, 4.950334085), (4.821260737, 5.012790777), (4.781908002, 5.072717729), (4.735316585, 5.127453998), (4.684461977, 5.178434101), (4.62897783, 5.22512899), (4.569525593, 5.266595122), (4.507249934, 5.303870591), (4.441018967, 5.334299022), (4.371713727, 5.358915551), (4.29961025, 5.379554656), (4.224066596, 5.392304393), (4.145731594, 5.40209207), (4.092359182, 5.40262243), (4.065081904, 5.402893482)],
                knots=[0, 0, 0, 0, 1.051226935, 2.070641259, 3.064374968, 4.034983734, 4.997599858, 5.953980297, 6.92954377, 7.901109626, 8.875958313, 9.851998019, 10.826131395, 11.811470594, 12.818270757, 13.847890818, 14.900111925, 16, 16, 16, 16], degree=3))
            add(Edge.make_bspline(
                [(4.065081904, 5.402893482), (4.027621622, 5.402136956), (3.95451036, 5.400660441), (3.84764705, 5.384198307), (3.745794169, 5.361223694), (3.649362485, 5.32614158), (3.558949174, 5.281271846), (3.473526684, 5.226727667), (3.393563858, 5.162742669), (3.319033671, 5.088558841), (3.252152959, 5.002834902), (3.193355266, 4.905393862), (3.144577309, 4.795129453), (3.104977365, 4.673123713), (3.073807698, 4.539086512), (3.051550102, 4.39284594), (3.039240982, 4.234301954), (3.037259111, 4.124602201), (3.03623575, 4.067957585)],
                knots=[0, 0, 0, 0, 0.938194206, 1.831074359, 2.704771284, 3.551924377, 4.396294915, 5.230222094, 6.087631332, 6.958733431, 7.860107878, 8.806247581, 9.804197948, 10.875520245, 12.017191412, 13.250061517, 14.580040491, 16, 16, 16, 16], degree=3))
            add(Edge.make_bspline(
                [(3.03623575, 4.067957585), (3.037249034, 4.007841988), (3.039201475, 3.892008492), (3.051507983, 3.724929387), (3.073907907, 3.571260811), (3.104663329, 3.430730056), (3.144462832, 3.303423199), (3.1931583, 3.189560541), (3.251047919, 3.089008738), (3.318041624, 3.001834743), (3.3924457, 2.926952551), (3.472244969, 2.862570915), (3.55696863, 2.80752487), (3.647126515, 2.762236533), (3.743061533, 2.72797641), (3.843985242, 2.703130369), (3.950267946, 2.687335345), (4.023091528, 2.685752793), (4.060274212, 2.684944765)],
                knots=[0, 0, 0, 0, 1.475208372, 2.842499301, 4.107722225, 5.282836115, 6.369007568, 7.375918121, 8.315702116, 9.208439171, 10.065831443, 10.90006451, 11.71996243, 12.54067204, 13.369972975, 14.214060185, 15.088124569, 16, 16, 16, 16], degree=3))
            add(Edge.make_bspline(
                [(4.060274212, 2.684944765), (4.087802914, 2.685631562), (4.141934021, 2.686982048), (4.22194397, 2.695553476), (4.298737204, 2.711910812), (4.3726896, 2.733540427), (4.444088489, 2.760679214), (4.511844803, 2.795492821), (4.577291618, 2.835505891), (4.639070965, 2.882398144), (4.6980101, 2.93504365), (4.751766089, 2.995888735), (4.801629231, 3.063471428), (4.846966938, 3.138243387), (4.889294086, 3.219564589), (4.92530624, 3.308702064), (4.958854788, 3.404215308), (4.976102112, 3.471120718), (4.984953699, 3.505457585)],
                knots=[0, 0, 0, 0, 0.980177776, 1.927374078, 2.859849964, 3.771585772, 4.668674471, 5.574490016, 6.479656464, 7.396337719, 8.332153134, 9.288470092, 10.28125149, 11.318486971, 12.398724812, 13.541284404, 14.738150009, 16, 16, 16, 16], degree=3))
        make_face()
    extrude(amount=-CUT_EXTRUDE4_DEPTH, mode=Mode.SUBTRACT)


solid = part.part
